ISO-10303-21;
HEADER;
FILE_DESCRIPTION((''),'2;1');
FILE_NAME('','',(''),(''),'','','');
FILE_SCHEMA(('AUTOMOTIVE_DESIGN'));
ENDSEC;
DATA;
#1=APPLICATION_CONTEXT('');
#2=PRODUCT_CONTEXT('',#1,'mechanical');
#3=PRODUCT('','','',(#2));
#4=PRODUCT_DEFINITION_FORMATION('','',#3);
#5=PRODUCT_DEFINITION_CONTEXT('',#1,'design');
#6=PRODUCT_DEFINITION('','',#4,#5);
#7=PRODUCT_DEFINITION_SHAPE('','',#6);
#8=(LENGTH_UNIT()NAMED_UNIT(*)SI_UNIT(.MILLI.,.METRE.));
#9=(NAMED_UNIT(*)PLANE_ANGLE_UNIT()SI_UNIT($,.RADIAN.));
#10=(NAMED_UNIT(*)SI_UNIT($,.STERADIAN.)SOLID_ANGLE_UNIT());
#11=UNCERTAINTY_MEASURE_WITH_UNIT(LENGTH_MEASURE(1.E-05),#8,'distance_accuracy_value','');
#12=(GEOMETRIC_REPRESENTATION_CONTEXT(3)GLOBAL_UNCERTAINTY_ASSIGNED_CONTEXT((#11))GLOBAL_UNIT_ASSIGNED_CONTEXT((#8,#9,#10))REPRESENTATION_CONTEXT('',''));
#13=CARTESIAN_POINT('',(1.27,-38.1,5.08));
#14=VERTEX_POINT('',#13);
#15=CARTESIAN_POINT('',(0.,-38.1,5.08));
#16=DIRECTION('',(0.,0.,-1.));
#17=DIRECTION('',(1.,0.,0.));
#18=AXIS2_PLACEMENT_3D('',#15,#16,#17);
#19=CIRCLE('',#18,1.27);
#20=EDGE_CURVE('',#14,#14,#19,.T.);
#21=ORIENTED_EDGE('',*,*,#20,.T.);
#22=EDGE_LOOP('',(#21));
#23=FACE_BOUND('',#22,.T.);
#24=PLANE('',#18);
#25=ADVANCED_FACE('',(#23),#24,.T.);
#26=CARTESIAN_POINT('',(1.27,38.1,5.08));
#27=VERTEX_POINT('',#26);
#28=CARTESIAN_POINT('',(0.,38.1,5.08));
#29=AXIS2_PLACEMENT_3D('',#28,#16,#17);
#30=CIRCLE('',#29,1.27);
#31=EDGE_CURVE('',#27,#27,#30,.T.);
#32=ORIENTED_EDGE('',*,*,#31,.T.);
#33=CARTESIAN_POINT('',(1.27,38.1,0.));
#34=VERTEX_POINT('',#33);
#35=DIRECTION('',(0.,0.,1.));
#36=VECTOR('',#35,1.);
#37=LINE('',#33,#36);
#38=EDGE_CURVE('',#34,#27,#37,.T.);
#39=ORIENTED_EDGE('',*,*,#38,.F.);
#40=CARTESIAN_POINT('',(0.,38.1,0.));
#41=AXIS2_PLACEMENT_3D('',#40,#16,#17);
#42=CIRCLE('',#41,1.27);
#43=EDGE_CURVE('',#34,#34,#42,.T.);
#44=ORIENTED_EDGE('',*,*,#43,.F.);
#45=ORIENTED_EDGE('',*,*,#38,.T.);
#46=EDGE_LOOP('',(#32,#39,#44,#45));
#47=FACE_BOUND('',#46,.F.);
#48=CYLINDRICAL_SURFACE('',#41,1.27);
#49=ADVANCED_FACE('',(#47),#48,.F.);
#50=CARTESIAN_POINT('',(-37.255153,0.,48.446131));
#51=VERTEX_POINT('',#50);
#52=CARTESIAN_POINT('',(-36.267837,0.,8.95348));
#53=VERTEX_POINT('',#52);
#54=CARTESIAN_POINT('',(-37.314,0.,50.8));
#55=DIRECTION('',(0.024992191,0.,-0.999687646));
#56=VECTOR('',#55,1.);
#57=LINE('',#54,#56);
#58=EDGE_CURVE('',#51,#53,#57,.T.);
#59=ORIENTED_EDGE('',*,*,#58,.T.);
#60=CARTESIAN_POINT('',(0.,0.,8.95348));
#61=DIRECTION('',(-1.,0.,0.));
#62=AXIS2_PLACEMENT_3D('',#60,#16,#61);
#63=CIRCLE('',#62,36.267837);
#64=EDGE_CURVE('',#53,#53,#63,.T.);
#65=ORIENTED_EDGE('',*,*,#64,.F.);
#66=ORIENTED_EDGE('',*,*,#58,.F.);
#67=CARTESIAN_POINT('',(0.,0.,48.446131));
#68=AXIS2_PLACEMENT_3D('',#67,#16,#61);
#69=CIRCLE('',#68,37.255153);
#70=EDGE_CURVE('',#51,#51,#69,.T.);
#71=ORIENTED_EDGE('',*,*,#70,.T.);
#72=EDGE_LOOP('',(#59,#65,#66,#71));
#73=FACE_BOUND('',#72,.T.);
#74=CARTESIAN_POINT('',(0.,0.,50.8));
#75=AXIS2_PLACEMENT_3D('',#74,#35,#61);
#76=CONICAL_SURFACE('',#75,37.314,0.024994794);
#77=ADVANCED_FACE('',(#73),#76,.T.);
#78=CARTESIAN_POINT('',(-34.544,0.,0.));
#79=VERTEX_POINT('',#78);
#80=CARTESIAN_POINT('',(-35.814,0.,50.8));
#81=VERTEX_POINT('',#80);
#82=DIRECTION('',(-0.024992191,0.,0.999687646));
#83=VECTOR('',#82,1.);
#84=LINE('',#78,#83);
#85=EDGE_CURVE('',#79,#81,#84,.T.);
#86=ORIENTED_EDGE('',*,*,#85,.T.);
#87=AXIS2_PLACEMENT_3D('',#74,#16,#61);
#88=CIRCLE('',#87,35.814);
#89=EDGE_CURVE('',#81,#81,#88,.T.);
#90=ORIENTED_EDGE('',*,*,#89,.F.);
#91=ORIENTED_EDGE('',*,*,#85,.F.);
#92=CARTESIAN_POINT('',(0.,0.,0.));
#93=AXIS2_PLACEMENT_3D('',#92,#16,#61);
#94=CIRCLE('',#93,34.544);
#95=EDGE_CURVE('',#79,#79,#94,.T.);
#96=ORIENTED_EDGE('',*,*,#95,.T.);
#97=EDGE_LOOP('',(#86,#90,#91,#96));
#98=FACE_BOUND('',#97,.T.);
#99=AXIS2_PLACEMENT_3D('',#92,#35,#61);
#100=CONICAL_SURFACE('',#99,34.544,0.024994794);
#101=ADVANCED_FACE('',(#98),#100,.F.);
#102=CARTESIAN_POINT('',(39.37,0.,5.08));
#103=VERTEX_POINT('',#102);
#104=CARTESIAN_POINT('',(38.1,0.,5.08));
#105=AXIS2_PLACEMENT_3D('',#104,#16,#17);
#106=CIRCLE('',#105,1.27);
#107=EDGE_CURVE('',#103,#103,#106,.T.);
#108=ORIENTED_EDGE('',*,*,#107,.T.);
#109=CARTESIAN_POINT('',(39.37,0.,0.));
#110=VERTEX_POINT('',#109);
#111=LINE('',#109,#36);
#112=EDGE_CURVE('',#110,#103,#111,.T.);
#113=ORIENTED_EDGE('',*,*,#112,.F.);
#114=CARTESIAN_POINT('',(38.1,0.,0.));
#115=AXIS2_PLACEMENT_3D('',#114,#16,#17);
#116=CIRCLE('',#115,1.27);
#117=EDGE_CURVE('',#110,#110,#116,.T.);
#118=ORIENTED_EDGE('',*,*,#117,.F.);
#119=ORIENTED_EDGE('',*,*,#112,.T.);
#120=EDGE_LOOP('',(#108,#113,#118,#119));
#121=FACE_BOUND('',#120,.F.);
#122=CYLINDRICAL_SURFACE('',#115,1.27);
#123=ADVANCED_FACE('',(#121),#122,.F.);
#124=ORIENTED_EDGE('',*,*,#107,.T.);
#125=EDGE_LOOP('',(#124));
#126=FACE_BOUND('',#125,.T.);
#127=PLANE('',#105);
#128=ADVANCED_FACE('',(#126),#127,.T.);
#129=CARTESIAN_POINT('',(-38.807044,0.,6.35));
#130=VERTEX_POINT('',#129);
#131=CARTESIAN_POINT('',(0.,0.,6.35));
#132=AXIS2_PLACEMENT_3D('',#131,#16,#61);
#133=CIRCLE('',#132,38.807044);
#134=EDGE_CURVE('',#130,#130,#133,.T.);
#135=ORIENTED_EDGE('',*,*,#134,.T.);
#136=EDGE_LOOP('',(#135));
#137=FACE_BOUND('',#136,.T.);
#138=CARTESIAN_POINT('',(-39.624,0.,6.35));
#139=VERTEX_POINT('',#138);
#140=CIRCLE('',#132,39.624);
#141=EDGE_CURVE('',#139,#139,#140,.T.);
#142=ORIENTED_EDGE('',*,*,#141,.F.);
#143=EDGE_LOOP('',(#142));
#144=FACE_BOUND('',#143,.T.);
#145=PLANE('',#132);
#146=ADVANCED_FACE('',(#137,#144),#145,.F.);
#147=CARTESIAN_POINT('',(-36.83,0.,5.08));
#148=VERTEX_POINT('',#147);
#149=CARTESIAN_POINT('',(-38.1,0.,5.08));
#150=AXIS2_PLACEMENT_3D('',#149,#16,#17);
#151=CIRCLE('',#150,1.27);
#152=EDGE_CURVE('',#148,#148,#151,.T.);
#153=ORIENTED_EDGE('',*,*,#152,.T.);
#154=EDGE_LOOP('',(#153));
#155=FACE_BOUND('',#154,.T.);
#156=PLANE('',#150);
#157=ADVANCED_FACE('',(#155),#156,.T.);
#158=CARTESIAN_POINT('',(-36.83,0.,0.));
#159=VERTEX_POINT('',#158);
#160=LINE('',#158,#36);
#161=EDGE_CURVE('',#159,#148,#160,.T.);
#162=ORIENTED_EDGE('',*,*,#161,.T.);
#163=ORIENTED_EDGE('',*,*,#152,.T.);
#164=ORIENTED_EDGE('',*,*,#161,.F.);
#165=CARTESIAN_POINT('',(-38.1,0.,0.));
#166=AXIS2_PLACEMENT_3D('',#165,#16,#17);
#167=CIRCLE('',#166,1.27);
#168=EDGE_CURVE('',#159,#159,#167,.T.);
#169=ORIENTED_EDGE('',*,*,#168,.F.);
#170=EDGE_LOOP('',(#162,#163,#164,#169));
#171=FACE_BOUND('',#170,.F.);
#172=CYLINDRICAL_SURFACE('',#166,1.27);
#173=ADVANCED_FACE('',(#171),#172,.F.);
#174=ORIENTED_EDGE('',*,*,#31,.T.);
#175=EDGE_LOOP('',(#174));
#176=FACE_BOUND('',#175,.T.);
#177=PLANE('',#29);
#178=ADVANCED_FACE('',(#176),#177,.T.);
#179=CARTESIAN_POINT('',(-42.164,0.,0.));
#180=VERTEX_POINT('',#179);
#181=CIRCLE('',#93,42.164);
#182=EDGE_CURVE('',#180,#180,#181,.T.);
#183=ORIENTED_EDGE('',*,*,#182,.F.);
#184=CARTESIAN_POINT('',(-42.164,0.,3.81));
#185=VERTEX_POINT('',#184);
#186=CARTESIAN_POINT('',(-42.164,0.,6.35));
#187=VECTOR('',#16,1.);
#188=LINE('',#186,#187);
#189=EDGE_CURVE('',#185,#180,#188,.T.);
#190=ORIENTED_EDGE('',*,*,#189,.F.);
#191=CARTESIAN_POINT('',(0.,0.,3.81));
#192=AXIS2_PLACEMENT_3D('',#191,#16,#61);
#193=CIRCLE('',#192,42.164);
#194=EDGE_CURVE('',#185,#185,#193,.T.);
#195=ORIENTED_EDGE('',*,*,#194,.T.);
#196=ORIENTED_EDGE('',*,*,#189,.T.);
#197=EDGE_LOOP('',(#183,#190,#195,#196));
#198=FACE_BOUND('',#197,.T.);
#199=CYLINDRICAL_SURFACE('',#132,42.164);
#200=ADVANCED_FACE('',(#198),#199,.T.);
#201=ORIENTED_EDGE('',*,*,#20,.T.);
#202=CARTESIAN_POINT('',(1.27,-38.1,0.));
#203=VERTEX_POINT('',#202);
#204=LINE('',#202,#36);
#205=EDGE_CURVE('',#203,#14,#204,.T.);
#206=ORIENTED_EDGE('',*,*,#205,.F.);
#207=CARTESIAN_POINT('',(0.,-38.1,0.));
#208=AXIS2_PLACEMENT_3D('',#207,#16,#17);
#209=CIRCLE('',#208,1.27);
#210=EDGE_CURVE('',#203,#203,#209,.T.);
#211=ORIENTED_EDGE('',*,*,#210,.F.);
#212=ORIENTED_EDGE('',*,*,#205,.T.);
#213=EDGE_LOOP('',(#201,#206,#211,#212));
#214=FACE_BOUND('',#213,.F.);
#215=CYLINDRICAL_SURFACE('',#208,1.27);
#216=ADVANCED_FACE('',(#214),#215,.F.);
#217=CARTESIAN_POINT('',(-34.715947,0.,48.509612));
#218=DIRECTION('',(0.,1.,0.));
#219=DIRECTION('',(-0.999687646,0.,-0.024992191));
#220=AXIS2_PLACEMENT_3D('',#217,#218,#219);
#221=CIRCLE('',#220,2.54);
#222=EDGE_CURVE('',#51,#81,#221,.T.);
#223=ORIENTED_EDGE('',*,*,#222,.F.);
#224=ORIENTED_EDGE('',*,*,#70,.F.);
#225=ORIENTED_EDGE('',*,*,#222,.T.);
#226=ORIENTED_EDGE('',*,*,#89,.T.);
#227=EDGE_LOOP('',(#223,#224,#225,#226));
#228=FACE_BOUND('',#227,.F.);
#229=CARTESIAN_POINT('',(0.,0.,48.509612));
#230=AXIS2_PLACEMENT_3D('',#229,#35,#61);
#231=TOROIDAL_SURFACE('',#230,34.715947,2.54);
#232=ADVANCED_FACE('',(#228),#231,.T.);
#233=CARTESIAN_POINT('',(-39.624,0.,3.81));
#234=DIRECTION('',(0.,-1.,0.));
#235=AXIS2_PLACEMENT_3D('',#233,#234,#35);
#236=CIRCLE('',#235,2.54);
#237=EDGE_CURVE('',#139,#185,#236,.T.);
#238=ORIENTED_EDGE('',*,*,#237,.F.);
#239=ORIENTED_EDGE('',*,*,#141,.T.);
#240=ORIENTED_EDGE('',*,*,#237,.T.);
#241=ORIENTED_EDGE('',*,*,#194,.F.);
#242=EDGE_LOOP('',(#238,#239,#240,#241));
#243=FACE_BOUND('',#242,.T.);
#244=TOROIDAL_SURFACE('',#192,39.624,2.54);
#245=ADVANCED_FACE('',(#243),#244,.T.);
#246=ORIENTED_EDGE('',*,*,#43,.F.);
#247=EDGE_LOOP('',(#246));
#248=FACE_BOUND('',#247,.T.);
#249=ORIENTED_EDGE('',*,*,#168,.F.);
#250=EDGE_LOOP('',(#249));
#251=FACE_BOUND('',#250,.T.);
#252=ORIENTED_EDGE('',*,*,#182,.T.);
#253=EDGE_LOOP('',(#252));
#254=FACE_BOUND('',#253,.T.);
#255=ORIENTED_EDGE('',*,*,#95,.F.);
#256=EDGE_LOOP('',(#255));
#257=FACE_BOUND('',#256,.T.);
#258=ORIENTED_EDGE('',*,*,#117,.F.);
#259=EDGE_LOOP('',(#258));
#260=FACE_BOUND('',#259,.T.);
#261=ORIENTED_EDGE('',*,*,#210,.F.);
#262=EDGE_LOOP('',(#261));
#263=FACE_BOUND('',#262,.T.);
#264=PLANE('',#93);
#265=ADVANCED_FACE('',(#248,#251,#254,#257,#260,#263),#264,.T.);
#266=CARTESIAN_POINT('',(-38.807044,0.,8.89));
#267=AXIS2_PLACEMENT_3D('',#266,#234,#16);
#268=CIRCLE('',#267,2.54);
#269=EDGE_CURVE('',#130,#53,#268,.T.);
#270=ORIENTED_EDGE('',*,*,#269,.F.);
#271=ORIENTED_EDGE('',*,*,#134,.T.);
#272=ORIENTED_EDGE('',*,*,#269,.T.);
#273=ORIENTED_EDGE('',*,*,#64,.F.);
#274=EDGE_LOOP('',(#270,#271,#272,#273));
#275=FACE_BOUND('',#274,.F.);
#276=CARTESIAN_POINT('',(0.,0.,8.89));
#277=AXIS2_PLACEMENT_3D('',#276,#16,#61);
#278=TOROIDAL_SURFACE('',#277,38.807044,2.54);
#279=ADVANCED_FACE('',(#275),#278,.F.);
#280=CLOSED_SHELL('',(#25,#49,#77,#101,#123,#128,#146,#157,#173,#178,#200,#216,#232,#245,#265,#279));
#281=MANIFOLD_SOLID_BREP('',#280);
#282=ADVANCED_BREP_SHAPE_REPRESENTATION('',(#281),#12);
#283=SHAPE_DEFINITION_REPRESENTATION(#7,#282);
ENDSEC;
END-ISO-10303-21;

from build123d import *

# Parameters (mm, degrees)
F3_R     = 1.27
F4_DEPTH = 5.08


# Not quite as in the source:
# - a fillet or chamfer that OpenCascade refuses, or shapes differently, is made with other operations: its cross-section is extruded or revolved along the edge and cut away or added


with BuildPart() as f1:
    # F0 (on Front) → F1 (revolve)
    with BuildSketch(Plane.XZ):
        Polygon((-42.164, 0), (-34.544, 0), (-35.814, 50.8), (-37.314, 50.8), (-36.20275, 6.35), (-42.164, 6.35), align=None)
    revolve(axis=Axis((0, 0, 8.2894073013), (0, 0, -1)))

    # F2: fillet of radius 2.54 on 3 edges, made by hand

    # F2_s1 → F2_t2 (revolve)
    with BuildSketch(Plane.XZ):
        with BuildLine():
            ThreePointArc((-38.807043626, 6.35), (-36.9886872775, 7.1165344126), (-36.2678370041, 8.9534801655))
            Line((-36.2678370041, 8.9534801655), (-36.20275, 6.35))
            Line((-36.20275, 6.35), (-38.807043626, 6.35))
        make_face()
    revolve(axis=Axis((0, 0, 6.35), (0, 0, -1)))

    # F2_s3 → F2_t4 (revolve, cut)
    with BuildSketch(Plane.XZ):
        with BuildLine():
            ThreePointArc((-39.624, 6.35), (-41.4200512242, 5.6060512242), (-42.164, 3.81))
            Line((-42.164, 3.81), (-42.164, 6.35))
            Line((-42.164, 6.35), (-39.624, 6.35))
        make_face()
    revolve(axis=Axis((0, 0, 6.35), (0, 0, -1)), mode=Mode.SUBTRACT)

    # F2_s5 → F2_t6 (revolve, cut)
    with BuildSketch(Plane.XZ):
        with BuildLine():
            ThreePointArc((-37.2551532867, 48.4461314672), (-36.8821851711, 49.8358886527), (-35.814, 50.8))
            Line((-35.814, 50.8), (-37.314, 50.8))
            Line((-37.314, 50.8), (-37.2551532867, 48.4461314672))
        make_face()
    revolve(axis=Axis((0, 0, 50.8), (0, 0, -1)), mode=Mode.SUBTRACT)

    # F3 (on face) → F4 (cut)
    with BuildSketch(Plane(origin=(0, 0, 0), x_dir=(1, 0, 0), z_dir=(0, 0, -1))):
        with Locations((0, 38.1)):
            Circle(F3_R)
        with Locations((38.1, 0)):
            Circle(F3_R)
        with Locations((0, -38.1)):
            Circle(F3_R)
        with Locations((-38.1, 0)):
            Circle(F3_R)
    extrude(amount=-F4_DEPTH, mode=Mode.SUBTRACT)


solid = f1.part
